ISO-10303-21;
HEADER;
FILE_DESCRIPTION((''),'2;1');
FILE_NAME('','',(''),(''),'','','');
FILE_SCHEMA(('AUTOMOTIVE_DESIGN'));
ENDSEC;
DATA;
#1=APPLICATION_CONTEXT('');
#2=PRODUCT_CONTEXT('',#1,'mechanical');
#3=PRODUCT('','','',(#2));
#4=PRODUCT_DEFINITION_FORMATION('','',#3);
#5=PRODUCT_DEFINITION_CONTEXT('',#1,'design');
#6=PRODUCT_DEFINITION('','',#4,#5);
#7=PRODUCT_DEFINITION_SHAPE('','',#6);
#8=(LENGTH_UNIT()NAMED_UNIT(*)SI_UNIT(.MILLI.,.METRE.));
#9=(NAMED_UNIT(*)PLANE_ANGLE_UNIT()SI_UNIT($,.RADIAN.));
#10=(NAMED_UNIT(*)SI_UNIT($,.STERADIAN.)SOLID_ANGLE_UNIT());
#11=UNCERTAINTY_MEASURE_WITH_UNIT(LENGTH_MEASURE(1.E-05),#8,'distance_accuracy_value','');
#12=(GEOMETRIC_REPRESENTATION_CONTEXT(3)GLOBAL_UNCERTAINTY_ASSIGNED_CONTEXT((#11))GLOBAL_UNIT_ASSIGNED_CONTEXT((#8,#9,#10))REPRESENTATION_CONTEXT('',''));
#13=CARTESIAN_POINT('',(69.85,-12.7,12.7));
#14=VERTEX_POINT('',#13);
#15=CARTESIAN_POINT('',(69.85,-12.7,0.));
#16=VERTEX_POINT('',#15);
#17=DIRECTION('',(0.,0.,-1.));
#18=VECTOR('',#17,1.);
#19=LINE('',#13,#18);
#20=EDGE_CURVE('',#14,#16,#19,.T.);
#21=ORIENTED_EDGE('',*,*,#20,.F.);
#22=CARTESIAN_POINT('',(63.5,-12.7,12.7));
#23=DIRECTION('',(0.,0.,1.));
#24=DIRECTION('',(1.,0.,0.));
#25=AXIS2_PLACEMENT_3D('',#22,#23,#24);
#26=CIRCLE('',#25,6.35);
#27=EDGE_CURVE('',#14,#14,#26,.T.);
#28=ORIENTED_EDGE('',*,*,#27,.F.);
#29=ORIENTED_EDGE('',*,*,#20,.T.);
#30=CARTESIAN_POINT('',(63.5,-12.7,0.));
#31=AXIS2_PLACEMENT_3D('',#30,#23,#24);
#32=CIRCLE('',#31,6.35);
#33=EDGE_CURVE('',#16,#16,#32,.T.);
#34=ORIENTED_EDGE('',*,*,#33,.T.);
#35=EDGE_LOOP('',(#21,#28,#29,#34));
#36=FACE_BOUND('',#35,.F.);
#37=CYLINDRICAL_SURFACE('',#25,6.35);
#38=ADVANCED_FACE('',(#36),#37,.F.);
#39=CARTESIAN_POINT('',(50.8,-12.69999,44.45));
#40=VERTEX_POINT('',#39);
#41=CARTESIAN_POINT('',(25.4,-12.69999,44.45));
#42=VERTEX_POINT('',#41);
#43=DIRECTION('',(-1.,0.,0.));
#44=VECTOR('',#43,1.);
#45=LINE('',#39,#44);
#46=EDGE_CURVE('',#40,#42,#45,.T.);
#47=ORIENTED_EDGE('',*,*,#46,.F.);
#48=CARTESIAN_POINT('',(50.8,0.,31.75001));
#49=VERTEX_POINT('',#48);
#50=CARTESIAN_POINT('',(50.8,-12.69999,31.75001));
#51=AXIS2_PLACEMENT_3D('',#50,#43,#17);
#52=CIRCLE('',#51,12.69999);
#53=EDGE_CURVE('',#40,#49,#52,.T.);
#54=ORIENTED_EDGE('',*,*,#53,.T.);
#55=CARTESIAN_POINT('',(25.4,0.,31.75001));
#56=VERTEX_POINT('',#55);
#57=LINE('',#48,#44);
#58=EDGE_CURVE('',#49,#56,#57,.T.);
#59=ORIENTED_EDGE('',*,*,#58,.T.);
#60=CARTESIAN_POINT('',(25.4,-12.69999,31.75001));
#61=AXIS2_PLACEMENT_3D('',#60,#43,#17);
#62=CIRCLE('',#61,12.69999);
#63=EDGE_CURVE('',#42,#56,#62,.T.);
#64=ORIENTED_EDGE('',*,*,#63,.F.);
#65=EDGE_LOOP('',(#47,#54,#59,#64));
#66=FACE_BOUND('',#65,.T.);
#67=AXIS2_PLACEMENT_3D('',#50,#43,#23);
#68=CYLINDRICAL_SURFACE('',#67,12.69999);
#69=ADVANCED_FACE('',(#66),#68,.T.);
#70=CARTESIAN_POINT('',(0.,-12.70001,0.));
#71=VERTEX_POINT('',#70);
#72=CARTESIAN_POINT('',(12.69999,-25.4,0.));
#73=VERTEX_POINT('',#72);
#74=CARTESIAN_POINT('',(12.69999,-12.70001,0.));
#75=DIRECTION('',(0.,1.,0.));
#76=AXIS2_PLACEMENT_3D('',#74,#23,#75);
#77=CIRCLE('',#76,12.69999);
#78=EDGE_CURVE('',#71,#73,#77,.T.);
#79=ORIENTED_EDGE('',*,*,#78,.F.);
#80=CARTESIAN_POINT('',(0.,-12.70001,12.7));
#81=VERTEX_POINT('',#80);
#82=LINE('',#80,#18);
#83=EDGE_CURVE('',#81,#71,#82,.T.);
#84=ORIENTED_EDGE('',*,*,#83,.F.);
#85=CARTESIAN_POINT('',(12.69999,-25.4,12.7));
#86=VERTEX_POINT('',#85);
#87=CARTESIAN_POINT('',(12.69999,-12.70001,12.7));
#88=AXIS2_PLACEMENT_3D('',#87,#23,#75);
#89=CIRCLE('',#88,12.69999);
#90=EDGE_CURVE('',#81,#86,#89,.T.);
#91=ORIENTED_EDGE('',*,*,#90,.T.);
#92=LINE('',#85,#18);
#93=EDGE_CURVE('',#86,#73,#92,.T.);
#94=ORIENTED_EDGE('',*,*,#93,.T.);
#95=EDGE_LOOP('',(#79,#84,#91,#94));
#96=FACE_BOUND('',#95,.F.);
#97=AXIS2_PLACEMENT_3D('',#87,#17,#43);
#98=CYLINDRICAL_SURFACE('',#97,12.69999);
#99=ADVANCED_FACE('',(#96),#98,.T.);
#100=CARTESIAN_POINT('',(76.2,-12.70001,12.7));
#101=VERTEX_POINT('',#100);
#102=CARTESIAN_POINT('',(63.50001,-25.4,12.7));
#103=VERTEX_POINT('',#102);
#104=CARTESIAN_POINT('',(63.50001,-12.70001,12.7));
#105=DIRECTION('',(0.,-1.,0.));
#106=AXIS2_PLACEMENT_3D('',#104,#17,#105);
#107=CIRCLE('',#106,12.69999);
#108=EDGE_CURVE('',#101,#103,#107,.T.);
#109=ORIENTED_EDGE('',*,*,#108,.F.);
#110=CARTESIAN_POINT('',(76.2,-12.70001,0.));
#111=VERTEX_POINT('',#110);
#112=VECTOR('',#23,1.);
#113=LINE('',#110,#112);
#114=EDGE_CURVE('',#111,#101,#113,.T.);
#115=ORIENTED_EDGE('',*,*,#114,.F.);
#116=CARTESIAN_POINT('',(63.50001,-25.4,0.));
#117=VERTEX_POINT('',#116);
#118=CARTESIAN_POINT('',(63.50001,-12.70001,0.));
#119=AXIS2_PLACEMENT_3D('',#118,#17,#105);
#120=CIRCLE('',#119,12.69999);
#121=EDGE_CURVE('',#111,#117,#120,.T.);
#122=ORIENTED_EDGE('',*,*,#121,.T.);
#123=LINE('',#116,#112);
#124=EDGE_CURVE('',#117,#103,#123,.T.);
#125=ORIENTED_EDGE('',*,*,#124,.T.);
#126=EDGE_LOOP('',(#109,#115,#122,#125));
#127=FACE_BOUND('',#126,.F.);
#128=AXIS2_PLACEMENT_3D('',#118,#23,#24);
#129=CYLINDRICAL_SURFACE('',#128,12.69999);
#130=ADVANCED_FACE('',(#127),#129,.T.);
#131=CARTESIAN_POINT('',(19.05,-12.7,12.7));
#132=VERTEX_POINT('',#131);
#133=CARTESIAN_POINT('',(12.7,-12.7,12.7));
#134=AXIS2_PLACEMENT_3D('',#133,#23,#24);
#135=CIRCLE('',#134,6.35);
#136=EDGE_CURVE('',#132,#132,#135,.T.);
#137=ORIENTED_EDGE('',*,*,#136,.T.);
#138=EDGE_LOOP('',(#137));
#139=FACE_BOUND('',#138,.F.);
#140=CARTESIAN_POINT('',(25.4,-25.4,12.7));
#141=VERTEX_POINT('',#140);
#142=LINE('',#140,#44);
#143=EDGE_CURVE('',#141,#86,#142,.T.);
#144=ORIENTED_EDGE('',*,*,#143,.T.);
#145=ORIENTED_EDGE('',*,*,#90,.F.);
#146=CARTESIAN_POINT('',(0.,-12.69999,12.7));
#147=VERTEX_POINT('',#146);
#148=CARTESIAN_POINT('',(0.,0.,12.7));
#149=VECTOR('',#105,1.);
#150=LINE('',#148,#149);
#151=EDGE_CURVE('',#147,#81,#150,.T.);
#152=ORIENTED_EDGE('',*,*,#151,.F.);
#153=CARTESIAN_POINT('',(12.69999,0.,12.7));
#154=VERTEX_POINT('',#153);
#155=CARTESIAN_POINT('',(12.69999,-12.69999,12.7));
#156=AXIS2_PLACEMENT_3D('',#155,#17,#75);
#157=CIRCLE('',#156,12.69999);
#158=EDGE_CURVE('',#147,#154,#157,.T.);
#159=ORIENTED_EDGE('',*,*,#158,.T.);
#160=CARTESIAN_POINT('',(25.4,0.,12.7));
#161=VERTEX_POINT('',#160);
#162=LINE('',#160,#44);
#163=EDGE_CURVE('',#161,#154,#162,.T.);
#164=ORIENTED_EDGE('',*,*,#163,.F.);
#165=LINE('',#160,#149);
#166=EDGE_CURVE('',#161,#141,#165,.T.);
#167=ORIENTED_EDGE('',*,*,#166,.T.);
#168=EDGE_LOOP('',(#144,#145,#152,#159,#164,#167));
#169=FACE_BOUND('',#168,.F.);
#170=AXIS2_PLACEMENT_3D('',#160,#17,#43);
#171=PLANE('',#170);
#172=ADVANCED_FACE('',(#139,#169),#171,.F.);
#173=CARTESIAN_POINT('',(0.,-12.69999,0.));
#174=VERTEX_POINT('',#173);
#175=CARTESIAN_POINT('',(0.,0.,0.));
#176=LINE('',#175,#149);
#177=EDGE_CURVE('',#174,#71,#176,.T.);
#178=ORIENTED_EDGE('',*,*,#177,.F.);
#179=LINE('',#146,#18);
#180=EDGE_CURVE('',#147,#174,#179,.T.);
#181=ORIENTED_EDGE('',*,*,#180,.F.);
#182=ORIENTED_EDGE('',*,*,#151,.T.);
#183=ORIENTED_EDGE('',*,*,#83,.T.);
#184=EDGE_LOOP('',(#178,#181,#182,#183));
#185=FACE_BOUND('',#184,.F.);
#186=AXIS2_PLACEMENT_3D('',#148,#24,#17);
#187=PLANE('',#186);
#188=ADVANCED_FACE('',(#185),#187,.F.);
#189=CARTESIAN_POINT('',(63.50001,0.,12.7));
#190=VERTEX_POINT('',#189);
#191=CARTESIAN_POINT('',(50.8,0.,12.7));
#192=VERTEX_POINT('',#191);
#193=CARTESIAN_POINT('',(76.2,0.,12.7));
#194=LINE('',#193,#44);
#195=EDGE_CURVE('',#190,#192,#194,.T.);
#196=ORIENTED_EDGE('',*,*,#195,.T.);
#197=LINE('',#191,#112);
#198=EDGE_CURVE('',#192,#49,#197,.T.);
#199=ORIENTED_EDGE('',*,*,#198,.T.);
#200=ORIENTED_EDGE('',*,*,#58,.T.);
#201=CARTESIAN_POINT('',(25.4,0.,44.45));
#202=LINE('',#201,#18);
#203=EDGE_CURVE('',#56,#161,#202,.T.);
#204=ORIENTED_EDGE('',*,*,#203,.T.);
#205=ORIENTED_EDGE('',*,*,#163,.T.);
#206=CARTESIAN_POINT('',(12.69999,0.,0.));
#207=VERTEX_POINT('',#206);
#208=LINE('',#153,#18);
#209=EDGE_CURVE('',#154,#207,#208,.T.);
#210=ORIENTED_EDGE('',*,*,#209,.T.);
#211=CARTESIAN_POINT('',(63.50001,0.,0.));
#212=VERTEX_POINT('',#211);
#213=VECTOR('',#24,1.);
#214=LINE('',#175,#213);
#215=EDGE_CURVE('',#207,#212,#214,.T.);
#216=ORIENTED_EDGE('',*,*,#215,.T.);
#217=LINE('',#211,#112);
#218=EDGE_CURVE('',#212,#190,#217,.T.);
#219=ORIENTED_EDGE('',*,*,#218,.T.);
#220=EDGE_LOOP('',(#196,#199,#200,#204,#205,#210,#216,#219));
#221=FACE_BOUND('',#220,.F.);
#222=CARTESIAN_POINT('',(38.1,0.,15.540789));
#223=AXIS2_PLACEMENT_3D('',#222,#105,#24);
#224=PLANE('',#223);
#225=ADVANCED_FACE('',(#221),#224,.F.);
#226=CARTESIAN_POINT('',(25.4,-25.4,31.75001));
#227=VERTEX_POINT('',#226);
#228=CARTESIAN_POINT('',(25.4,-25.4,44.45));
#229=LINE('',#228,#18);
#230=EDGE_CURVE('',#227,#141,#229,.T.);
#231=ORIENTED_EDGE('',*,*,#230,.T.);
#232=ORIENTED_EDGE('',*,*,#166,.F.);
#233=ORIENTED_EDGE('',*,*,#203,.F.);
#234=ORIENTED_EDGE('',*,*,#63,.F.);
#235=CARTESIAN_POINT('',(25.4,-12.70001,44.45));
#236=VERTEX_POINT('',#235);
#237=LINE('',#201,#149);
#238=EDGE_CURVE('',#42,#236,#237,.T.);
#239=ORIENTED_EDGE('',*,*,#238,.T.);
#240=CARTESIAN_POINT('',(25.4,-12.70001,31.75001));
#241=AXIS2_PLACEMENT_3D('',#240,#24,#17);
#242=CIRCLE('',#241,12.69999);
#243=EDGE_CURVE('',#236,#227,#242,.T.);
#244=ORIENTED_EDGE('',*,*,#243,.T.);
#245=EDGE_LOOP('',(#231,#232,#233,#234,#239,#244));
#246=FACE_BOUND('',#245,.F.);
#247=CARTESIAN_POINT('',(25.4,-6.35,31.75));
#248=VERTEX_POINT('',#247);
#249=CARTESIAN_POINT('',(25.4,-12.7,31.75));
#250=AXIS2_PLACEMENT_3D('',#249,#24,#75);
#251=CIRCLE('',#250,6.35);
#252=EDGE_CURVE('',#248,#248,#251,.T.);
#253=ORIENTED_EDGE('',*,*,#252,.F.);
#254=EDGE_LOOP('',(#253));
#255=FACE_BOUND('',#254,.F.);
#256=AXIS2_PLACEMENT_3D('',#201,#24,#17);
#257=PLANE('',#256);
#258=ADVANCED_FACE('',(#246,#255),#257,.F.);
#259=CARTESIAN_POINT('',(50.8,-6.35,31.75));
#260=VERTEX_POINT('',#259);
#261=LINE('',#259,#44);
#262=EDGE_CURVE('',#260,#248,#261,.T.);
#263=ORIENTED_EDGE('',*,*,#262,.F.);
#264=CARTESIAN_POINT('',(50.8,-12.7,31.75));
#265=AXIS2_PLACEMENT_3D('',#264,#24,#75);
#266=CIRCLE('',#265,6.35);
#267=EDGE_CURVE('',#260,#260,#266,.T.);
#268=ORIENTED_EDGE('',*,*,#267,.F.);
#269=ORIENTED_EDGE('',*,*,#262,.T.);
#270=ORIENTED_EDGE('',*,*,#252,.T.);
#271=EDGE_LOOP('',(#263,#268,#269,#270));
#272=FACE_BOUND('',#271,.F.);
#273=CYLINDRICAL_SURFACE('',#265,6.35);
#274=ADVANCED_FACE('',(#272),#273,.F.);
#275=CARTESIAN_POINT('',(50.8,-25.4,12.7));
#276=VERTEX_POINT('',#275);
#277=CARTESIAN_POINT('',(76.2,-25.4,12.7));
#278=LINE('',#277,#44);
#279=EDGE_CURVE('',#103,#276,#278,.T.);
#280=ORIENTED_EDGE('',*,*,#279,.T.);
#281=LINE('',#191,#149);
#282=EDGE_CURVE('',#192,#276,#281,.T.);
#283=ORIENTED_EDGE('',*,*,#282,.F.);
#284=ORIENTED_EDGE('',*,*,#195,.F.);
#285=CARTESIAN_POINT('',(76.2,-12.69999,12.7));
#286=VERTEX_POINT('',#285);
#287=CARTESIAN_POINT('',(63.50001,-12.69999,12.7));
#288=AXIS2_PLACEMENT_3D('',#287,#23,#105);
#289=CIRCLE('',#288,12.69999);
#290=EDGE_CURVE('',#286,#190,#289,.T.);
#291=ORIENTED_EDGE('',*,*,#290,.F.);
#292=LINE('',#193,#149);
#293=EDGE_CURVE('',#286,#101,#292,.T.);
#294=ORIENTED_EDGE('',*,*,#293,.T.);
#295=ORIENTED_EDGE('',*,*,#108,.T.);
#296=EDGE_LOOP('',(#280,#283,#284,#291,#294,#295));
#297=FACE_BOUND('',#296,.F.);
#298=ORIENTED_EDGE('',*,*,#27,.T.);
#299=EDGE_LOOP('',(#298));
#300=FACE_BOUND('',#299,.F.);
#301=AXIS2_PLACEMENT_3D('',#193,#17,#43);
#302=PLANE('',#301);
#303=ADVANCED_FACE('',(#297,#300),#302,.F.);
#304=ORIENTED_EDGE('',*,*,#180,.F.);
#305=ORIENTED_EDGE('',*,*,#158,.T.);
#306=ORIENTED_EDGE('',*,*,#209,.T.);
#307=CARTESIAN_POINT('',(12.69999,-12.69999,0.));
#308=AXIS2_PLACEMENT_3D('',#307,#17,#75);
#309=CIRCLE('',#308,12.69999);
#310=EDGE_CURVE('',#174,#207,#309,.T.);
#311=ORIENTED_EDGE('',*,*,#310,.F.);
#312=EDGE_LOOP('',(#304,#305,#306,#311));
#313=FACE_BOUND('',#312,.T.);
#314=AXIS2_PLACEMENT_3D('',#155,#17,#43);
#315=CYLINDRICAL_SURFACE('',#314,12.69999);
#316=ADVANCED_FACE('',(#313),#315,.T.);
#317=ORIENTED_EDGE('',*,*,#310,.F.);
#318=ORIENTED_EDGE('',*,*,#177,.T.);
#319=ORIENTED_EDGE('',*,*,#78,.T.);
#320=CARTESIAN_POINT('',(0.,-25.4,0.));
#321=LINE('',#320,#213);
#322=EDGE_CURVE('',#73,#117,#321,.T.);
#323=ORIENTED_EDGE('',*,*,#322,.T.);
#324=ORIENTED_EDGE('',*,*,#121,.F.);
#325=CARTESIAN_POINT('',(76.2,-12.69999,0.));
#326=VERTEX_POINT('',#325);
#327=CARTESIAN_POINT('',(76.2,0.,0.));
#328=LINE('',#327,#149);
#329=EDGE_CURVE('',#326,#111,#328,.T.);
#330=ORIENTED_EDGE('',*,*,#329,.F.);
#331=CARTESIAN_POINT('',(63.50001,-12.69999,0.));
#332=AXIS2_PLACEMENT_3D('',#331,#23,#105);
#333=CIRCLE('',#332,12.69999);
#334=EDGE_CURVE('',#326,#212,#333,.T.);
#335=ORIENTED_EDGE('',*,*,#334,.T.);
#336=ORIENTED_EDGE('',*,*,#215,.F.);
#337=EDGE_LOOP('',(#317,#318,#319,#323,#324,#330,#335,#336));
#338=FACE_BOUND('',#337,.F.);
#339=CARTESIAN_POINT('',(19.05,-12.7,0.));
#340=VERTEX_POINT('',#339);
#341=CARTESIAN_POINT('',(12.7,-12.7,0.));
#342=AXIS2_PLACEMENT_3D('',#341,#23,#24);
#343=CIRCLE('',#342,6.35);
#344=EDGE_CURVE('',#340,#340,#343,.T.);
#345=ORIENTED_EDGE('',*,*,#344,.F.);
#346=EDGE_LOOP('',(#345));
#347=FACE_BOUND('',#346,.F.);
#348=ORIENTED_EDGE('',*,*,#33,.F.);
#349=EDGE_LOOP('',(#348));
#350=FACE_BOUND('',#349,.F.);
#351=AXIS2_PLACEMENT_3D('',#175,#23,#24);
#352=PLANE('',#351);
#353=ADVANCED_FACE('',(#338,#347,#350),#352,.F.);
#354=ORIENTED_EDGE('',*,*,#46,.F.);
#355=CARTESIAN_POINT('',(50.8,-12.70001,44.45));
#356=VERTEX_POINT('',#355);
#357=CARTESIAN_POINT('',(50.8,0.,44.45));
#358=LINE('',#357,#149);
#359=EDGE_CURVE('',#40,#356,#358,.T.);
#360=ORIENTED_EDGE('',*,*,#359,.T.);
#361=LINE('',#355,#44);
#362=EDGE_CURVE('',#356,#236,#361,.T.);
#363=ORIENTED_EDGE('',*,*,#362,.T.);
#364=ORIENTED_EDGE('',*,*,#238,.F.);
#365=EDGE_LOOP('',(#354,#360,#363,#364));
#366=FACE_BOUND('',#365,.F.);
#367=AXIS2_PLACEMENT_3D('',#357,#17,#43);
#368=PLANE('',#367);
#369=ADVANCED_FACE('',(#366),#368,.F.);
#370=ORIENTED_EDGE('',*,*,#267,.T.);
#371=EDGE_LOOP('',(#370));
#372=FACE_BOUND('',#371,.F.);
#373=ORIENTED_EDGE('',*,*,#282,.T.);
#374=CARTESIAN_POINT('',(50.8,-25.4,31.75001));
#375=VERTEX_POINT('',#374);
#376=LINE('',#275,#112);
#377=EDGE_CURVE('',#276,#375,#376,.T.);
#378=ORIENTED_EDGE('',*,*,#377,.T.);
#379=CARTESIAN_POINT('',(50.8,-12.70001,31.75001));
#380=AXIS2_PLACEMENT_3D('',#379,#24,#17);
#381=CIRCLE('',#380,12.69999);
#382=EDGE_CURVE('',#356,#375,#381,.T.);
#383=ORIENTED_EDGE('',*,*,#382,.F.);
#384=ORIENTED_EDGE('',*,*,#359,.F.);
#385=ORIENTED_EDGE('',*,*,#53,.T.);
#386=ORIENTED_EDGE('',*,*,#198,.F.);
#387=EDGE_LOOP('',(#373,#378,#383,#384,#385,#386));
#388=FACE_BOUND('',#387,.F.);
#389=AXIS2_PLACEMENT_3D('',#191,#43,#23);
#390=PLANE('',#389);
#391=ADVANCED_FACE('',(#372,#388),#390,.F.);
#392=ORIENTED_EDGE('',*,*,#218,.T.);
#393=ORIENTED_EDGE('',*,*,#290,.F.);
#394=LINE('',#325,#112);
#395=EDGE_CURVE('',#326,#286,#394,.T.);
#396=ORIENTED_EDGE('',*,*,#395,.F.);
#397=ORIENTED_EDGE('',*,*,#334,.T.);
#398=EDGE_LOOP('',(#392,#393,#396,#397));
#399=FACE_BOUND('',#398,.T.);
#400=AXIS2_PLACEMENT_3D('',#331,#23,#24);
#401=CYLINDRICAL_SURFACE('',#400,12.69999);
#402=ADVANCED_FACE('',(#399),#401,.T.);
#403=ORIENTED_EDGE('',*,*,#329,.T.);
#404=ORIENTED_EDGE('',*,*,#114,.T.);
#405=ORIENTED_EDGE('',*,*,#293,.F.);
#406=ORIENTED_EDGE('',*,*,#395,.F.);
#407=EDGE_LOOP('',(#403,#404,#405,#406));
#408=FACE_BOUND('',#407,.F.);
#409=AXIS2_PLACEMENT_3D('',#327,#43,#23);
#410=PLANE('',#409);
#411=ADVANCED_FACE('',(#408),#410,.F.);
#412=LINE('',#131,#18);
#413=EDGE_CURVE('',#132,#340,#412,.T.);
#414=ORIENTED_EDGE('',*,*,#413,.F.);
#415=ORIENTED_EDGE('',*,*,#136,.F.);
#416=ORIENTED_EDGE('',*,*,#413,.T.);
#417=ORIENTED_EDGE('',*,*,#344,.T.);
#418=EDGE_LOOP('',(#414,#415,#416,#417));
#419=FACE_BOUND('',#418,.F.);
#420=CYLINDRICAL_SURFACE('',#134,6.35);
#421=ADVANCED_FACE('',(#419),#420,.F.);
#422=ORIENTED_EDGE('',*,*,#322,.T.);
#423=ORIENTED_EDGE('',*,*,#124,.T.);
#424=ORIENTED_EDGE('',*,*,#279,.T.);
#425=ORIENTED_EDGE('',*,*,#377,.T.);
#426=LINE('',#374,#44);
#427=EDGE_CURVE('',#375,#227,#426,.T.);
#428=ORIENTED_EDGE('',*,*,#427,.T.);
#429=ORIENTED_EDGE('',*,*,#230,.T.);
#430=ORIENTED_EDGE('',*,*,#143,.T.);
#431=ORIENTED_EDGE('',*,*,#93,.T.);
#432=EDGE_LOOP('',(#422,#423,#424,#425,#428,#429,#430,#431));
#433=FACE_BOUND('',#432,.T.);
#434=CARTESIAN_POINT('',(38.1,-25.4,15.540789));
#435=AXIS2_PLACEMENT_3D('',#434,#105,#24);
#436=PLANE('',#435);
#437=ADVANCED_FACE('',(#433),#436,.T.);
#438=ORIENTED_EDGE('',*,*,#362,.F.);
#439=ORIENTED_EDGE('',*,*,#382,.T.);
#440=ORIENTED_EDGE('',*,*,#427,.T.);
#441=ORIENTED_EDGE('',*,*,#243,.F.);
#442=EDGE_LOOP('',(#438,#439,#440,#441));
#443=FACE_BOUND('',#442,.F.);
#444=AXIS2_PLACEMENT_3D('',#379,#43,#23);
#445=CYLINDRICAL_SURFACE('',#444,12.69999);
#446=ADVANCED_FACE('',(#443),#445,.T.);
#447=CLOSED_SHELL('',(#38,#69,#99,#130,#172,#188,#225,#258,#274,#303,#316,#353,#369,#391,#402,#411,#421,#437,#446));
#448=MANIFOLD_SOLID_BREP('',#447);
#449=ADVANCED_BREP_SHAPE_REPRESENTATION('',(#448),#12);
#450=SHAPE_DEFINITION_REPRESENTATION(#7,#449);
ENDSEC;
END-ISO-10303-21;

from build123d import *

# Parameters (mm, degrees)
F1_DEPTH = 25.4
F2_R     = 12.69999
F3_R     = 6.35
F4_DEPTH = 25.4
F5_R     = 6.35
F6_DEPTH = 25.4
F7_R     = 6.35
F8_DEPTH = 25.4


# Not quite as in the source:
# - a fillet or chamfer is up to 0.001 mm smaller than in the source, because OpenCascade refuses the exact size


with BuildPart() as f1:
    # F0 (on Front) → F1 (new body)
    with BuildSketch(Plane.XZ):
        Polygon((0, 12.7), (0, 0), (76.2, 0), (76.2, 12.7), (50.8, 12.7), (50.8, 44.45), (25.4, 44.45), (25.4, 12.7), align=None)
    extrude(amount=F1_DEPTH)

    # F2 (radius 12.7 in the source; OpenCascade refuses exactly that, so slightly less here)
    f2_edges = [f1.edges().sort_by_distance(p)[0] for p in [
        (38.1, -25.4, 44.45),
        (38.1, 0, 44.45),
        (0, -25.4, 6.35),
        (76.2, -25.4, 6.35),
        (76.2, 0, 6.35),
        (0, 0, 6.35),
    ]]
    fillet(f2_edges, radius=F2_R)

    # F3 (on face) → F4 (cut)
    with BuildSketch(Plane.YZ.offset(50.8)):
        with Locations((-12.7, 31.75)):
            Circle(F3_R)
    extrude(amount=-F4_DEPTH, mode=Mode.SUBTRACT)

    # F5 (on face) → F6 (cut)
    with BuildSketch(Plane.XY.offset(12.7)):
        with Locations((12.7, -12.7)):
            Circle(F5_R)
    extrude(amount=-F6_DEPTH, mode=Mode.SUBTRACT)

    # F7 (on face) → F8 (cut)
    with BuildSketch(Plane.XY.offset(12.7)):
        with Locations((63.5, -12.7)):
            Circle(F7_R)
    extrude(amount=-F8_DEPTH, mode=Mode.SUBTRACT)


solid = f1.part
